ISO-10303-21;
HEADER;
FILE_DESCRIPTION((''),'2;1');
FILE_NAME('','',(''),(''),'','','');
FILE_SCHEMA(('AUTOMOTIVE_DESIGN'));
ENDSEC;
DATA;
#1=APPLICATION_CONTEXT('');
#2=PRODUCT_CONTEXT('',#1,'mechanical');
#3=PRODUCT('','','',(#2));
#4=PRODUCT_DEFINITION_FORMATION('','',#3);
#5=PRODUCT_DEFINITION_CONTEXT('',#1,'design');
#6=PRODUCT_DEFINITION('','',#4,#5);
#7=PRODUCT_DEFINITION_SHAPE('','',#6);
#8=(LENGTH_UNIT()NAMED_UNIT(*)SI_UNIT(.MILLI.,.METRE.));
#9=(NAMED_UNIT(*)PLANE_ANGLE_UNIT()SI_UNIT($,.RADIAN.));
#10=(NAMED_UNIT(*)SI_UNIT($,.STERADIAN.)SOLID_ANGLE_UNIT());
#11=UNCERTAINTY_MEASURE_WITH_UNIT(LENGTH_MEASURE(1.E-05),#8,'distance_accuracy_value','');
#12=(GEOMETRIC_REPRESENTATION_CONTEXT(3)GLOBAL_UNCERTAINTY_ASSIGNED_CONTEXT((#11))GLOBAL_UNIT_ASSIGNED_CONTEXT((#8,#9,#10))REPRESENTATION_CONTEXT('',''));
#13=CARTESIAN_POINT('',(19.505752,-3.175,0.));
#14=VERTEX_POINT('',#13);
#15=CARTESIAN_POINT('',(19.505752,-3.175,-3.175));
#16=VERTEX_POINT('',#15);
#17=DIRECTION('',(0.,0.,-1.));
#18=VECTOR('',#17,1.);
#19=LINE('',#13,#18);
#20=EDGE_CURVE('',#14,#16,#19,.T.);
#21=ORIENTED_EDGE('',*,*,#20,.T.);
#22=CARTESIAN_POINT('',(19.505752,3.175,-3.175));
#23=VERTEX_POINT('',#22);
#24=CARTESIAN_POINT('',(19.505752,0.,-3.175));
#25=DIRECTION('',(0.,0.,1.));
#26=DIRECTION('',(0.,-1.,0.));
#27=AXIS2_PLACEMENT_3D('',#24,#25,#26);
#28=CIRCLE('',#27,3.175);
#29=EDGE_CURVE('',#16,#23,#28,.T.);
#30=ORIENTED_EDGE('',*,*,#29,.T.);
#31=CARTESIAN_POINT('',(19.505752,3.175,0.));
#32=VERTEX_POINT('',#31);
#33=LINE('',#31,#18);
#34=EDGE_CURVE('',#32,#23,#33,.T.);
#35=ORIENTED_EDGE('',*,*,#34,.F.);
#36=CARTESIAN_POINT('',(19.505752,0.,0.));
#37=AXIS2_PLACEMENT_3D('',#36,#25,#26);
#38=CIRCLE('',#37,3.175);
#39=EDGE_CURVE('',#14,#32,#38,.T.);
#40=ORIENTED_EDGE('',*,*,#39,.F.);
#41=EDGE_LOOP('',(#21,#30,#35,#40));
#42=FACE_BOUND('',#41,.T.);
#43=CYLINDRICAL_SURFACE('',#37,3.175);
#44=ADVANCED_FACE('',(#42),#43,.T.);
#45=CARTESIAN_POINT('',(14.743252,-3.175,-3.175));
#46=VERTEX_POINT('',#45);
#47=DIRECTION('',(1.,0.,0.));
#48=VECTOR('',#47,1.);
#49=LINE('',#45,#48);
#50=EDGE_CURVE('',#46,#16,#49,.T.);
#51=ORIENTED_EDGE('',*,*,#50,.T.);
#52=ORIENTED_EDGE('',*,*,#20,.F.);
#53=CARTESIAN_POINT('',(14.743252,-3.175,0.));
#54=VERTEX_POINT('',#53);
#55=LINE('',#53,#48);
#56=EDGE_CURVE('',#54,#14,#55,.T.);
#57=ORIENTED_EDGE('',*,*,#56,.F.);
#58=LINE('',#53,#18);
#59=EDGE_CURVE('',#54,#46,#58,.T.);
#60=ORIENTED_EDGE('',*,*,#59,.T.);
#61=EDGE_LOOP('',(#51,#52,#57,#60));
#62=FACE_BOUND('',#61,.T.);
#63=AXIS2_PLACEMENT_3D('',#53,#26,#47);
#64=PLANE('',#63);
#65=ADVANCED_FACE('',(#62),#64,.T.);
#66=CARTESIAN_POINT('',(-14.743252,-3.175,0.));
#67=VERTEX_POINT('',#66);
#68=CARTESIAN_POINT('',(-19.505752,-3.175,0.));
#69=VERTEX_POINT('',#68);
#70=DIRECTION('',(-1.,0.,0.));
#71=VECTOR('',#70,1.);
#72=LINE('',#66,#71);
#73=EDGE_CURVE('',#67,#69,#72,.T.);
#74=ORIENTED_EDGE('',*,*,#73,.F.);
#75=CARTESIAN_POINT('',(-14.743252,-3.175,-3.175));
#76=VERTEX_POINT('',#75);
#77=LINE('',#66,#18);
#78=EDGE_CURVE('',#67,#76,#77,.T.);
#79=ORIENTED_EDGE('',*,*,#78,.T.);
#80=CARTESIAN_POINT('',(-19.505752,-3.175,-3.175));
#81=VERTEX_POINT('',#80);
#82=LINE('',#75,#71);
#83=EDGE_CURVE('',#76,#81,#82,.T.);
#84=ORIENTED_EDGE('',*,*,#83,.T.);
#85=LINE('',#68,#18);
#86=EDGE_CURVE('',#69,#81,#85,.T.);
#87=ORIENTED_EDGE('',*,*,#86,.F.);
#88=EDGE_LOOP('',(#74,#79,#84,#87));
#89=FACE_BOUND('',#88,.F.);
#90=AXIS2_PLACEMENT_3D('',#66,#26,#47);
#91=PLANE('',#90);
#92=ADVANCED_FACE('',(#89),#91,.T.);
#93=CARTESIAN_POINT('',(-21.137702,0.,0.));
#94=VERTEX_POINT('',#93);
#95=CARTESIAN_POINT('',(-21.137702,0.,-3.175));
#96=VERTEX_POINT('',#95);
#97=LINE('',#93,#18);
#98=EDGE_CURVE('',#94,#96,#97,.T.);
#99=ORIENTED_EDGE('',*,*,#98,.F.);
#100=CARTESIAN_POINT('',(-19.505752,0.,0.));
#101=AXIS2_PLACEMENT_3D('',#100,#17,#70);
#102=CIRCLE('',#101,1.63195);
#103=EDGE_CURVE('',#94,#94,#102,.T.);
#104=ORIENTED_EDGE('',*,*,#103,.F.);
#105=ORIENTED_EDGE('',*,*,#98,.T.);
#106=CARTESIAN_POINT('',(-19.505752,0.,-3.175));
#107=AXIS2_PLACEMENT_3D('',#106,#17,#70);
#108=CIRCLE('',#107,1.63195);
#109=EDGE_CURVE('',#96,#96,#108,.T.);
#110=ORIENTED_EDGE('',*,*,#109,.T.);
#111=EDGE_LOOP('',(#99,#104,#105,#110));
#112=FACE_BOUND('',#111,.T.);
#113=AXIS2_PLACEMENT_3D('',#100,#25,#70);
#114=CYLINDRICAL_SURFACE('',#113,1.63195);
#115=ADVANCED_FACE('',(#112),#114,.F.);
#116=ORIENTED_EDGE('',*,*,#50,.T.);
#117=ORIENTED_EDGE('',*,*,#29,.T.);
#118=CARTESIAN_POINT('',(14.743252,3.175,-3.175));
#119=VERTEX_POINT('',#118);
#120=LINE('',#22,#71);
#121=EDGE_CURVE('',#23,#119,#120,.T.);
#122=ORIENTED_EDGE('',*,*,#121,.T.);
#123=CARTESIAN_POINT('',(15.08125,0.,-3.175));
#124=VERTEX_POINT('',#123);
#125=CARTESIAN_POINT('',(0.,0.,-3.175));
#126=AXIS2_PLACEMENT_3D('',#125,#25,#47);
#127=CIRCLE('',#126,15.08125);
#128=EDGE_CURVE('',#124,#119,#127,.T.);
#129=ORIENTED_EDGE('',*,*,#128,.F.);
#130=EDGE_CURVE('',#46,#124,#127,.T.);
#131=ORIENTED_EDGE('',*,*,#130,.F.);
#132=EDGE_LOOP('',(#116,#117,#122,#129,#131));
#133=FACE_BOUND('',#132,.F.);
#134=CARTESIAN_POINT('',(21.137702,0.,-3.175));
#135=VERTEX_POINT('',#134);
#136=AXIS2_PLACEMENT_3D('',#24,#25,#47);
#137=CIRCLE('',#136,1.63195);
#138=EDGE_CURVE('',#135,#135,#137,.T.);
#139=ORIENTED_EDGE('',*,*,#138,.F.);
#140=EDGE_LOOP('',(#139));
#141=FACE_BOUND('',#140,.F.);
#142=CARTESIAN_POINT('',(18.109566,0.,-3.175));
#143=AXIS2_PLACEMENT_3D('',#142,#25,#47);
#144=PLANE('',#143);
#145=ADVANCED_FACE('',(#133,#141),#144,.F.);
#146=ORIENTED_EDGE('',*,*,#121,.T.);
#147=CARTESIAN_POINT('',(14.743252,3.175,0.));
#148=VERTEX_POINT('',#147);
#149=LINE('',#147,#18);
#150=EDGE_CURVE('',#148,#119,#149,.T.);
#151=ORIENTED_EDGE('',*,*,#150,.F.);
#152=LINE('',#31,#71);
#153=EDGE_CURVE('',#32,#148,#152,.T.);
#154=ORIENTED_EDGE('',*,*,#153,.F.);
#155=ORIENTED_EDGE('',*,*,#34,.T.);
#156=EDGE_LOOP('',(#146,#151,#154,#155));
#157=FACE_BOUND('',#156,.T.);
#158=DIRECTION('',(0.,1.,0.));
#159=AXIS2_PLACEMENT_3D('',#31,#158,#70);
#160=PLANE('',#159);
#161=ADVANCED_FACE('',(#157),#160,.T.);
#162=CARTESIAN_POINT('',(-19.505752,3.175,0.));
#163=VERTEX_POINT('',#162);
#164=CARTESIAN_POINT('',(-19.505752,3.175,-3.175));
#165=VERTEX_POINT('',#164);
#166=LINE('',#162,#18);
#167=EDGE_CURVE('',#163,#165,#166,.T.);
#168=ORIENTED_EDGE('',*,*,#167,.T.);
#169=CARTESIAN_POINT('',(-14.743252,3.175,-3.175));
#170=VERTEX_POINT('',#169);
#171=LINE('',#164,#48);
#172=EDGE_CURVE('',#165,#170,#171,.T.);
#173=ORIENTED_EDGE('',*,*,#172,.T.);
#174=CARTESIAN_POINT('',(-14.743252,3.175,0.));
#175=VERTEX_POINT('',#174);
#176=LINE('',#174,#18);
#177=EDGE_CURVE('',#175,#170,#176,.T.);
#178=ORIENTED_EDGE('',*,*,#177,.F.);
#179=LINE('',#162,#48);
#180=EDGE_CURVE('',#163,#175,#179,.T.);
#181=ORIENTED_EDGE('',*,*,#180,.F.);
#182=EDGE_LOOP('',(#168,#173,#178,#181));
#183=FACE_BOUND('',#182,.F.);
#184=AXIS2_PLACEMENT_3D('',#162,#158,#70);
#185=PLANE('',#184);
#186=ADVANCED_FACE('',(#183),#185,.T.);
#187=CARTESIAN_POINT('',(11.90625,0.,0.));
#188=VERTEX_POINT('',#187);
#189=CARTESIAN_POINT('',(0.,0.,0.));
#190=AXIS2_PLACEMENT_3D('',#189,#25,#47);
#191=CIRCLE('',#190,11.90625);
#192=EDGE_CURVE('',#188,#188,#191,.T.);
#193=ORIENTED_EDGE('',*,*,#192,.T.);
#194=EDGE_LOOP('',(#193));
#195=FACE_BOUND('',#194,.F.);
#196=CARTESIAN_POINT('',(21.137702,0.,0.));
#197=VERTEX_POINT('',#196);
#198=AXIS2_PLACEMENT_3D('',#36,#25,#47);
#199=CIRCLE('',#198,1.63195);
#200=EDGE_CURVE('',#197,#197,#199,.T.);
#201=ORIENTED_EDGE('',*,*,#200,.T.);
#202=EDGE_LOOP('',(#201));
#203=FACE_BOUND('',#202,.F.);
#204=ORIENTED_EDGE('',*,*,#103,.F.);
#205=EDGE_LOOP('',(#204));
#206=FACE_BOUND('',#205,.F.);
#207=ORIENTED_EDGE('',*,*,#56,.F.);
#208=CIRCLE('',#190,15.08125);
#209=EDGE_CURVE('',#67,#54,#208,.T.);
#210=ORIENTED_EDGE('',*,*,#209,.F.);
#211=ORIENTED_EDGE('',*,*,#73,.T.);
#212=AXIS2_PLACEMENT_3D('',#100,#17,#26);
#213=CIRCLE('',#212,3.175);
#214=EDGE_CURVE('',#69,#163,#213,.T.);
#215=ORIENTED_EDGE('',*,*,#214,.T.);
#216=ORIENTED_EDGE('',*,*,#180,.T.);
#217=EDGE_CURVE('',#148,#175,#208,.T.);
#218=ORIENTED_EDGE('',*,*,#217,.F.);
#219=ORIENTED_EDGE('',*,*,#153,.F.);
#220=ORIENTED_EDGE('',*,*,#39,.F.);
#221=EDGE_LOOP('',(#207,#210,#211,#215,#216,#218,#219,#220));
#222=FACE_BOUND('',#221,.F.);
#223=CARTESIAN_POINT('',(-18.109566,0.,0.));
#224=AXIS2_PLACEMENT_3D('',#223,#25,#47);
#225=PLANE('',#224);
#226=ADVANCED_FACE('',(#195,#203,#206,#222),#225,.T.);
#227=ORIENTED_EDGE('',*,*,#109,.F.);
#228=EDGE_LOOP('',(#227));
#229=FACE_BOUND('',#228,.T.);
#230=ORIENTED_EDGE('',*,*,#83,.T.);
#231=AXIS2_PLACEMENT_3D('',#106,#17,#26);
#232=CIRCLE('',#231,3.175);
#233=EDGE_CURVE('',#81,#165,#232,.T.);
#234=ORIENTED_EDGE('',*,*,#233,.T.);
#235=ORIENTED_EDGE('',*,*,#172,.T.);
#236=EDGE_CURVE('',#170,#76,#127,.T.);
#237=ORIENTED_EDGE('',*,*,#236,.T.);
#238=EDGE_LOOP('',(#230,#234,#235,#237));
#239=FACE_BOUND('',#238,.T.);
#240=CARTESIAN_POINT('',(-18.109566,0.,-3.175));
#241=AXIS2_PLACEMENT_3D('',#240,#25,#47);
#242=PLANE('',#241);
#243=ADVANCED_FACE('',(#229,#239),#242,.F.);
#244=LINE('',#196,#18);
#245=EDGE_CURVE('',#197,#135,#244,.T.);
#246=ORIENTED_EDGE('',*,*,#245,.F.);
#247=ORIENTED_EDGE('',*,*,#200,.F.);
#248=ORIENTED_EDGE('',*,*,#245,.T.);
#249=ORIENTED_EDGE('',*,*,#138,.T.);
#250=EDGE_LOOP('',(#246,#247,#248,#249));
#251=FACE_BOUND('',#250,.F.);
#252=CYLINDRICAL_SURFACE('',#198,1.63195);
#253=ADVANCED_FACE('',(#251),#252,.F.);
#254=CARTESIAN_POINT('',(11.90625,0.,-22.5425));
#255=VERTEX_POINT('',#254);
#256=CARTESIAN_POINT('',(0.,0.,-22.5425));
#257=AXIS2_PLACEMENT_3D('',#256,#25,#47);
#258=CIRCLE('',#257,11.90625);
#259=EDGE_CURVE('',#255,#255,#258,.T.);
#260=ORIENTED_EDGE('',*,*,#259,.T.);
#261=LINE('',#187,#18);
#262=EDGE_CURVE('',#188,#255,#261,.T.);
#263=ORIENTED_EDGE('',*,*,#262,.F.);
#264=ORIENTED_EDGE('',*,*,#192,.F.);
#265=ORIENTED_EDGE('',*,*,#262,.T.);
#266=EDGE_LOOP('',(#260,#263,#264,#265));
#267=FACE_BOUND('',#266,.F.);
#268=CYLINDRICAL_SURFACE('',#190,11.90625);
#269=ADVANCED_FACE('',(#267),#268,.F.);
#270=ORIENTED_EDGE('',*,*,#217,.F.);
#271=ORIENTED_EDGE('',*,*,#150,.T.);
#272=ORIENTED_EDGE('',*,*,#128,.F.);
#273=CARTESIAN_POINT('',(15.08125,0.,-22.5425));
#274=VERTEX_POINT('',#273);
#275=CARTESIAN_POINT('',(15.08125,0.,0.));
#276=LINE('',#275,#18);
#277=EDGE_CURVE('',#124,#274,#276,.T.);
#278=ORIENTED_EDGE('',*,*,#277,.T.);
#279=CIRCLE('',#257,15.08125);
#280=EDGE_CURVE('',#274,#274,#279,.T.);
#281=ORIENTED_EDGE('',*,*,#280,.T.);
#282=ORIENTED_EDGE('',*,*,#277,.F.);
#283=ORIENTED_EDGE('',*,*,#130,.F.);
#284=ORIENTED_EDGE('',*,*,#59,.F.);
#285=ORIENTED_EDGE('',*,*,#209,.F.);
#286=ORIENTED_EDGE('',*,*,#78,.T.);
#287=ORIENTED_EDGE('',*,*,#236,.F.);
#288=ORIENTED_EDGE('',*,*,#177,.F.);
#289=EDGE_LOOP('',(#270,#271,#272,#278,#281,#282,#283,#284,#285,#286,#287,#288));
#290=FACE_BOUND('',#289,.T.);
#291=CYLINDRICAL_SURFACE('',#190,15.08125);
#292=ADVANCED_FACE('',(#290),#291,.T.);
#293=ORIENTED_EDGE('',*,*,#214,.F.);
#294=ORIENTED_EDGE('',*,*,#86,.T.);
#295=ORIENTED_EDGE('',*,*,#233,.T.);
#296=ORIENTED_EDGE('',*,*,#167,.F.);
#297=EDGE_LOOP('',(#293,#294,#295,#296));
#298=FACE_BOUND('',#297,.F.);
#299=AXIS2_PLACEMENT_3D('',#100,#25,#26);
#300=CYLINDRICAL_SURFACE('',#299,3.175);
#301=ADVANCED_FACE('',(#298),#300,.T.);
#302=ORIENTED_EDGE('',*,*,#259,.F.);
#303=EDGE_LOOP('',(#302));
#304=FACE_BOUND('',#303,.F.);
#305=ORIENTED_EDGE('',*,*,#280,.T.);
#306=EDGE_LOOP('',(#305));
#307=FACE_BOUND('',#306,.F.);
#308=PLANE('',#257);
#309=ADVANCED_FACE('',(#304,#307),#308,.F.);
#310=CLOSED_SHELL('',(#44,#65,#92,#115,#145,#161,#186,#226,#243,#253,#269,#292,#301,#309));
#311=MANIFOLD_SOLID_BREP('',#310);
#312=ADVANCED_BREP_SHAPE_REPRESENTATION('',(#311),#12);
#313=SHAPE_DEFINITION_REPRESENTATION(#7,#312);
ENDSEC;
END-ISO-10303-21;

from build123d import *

# Parameters (mm, degrees)
F0_R     = 15.08125
F0_R_2   = 11.90625
F1_DEPTH = 22.5425
F2_R     = 1.63195
F3_DEPTH = 3.175


# Not quite as in the source:
# - a pattern or mirror of a feature is missing from the dataset's text; its kind, count and spacing are read off the source's solid


with BuildPart() as f1:
    # F0 (on Top) → F1 (new body)
    with BuildSketch(Plane.XY):
        Circle(F0_R)
        Circle(F0_R_2, mode=Mode.SUBTRACT)
    extrude(amount=-F1_DEPTH)

    # F2 (on Top) → F3 (join)
    with BuildSketch(Plane.XY):
        with BuildLine():
            Line((19.5057518992, 3.175), (14.7432518992, 3.175))
            Line((14.7432518992, 3.175), (14.7432518992, -3.175))
            Line((14.7432518992, -3.175), (19.5057518992, -3.175))
            ThreePointArc((19.5057518992, -3.175), (22.6807518992, 0), (19.5057518992, 3.175))
        make_face()
        with Locations((19.5057518992, 0)):
            Circle(F2_R, mode=Mode.SUBTRACT)
    f3 = extrude(amount=-F3_DEPTH)

    # F3_copies: F3 across plane
    add(f3.mirror(Plane(origin=(0, 0, 0), x_dir=(0, 0, -1), z_dir=(-1, 0, 0))))


solid = f1.part
